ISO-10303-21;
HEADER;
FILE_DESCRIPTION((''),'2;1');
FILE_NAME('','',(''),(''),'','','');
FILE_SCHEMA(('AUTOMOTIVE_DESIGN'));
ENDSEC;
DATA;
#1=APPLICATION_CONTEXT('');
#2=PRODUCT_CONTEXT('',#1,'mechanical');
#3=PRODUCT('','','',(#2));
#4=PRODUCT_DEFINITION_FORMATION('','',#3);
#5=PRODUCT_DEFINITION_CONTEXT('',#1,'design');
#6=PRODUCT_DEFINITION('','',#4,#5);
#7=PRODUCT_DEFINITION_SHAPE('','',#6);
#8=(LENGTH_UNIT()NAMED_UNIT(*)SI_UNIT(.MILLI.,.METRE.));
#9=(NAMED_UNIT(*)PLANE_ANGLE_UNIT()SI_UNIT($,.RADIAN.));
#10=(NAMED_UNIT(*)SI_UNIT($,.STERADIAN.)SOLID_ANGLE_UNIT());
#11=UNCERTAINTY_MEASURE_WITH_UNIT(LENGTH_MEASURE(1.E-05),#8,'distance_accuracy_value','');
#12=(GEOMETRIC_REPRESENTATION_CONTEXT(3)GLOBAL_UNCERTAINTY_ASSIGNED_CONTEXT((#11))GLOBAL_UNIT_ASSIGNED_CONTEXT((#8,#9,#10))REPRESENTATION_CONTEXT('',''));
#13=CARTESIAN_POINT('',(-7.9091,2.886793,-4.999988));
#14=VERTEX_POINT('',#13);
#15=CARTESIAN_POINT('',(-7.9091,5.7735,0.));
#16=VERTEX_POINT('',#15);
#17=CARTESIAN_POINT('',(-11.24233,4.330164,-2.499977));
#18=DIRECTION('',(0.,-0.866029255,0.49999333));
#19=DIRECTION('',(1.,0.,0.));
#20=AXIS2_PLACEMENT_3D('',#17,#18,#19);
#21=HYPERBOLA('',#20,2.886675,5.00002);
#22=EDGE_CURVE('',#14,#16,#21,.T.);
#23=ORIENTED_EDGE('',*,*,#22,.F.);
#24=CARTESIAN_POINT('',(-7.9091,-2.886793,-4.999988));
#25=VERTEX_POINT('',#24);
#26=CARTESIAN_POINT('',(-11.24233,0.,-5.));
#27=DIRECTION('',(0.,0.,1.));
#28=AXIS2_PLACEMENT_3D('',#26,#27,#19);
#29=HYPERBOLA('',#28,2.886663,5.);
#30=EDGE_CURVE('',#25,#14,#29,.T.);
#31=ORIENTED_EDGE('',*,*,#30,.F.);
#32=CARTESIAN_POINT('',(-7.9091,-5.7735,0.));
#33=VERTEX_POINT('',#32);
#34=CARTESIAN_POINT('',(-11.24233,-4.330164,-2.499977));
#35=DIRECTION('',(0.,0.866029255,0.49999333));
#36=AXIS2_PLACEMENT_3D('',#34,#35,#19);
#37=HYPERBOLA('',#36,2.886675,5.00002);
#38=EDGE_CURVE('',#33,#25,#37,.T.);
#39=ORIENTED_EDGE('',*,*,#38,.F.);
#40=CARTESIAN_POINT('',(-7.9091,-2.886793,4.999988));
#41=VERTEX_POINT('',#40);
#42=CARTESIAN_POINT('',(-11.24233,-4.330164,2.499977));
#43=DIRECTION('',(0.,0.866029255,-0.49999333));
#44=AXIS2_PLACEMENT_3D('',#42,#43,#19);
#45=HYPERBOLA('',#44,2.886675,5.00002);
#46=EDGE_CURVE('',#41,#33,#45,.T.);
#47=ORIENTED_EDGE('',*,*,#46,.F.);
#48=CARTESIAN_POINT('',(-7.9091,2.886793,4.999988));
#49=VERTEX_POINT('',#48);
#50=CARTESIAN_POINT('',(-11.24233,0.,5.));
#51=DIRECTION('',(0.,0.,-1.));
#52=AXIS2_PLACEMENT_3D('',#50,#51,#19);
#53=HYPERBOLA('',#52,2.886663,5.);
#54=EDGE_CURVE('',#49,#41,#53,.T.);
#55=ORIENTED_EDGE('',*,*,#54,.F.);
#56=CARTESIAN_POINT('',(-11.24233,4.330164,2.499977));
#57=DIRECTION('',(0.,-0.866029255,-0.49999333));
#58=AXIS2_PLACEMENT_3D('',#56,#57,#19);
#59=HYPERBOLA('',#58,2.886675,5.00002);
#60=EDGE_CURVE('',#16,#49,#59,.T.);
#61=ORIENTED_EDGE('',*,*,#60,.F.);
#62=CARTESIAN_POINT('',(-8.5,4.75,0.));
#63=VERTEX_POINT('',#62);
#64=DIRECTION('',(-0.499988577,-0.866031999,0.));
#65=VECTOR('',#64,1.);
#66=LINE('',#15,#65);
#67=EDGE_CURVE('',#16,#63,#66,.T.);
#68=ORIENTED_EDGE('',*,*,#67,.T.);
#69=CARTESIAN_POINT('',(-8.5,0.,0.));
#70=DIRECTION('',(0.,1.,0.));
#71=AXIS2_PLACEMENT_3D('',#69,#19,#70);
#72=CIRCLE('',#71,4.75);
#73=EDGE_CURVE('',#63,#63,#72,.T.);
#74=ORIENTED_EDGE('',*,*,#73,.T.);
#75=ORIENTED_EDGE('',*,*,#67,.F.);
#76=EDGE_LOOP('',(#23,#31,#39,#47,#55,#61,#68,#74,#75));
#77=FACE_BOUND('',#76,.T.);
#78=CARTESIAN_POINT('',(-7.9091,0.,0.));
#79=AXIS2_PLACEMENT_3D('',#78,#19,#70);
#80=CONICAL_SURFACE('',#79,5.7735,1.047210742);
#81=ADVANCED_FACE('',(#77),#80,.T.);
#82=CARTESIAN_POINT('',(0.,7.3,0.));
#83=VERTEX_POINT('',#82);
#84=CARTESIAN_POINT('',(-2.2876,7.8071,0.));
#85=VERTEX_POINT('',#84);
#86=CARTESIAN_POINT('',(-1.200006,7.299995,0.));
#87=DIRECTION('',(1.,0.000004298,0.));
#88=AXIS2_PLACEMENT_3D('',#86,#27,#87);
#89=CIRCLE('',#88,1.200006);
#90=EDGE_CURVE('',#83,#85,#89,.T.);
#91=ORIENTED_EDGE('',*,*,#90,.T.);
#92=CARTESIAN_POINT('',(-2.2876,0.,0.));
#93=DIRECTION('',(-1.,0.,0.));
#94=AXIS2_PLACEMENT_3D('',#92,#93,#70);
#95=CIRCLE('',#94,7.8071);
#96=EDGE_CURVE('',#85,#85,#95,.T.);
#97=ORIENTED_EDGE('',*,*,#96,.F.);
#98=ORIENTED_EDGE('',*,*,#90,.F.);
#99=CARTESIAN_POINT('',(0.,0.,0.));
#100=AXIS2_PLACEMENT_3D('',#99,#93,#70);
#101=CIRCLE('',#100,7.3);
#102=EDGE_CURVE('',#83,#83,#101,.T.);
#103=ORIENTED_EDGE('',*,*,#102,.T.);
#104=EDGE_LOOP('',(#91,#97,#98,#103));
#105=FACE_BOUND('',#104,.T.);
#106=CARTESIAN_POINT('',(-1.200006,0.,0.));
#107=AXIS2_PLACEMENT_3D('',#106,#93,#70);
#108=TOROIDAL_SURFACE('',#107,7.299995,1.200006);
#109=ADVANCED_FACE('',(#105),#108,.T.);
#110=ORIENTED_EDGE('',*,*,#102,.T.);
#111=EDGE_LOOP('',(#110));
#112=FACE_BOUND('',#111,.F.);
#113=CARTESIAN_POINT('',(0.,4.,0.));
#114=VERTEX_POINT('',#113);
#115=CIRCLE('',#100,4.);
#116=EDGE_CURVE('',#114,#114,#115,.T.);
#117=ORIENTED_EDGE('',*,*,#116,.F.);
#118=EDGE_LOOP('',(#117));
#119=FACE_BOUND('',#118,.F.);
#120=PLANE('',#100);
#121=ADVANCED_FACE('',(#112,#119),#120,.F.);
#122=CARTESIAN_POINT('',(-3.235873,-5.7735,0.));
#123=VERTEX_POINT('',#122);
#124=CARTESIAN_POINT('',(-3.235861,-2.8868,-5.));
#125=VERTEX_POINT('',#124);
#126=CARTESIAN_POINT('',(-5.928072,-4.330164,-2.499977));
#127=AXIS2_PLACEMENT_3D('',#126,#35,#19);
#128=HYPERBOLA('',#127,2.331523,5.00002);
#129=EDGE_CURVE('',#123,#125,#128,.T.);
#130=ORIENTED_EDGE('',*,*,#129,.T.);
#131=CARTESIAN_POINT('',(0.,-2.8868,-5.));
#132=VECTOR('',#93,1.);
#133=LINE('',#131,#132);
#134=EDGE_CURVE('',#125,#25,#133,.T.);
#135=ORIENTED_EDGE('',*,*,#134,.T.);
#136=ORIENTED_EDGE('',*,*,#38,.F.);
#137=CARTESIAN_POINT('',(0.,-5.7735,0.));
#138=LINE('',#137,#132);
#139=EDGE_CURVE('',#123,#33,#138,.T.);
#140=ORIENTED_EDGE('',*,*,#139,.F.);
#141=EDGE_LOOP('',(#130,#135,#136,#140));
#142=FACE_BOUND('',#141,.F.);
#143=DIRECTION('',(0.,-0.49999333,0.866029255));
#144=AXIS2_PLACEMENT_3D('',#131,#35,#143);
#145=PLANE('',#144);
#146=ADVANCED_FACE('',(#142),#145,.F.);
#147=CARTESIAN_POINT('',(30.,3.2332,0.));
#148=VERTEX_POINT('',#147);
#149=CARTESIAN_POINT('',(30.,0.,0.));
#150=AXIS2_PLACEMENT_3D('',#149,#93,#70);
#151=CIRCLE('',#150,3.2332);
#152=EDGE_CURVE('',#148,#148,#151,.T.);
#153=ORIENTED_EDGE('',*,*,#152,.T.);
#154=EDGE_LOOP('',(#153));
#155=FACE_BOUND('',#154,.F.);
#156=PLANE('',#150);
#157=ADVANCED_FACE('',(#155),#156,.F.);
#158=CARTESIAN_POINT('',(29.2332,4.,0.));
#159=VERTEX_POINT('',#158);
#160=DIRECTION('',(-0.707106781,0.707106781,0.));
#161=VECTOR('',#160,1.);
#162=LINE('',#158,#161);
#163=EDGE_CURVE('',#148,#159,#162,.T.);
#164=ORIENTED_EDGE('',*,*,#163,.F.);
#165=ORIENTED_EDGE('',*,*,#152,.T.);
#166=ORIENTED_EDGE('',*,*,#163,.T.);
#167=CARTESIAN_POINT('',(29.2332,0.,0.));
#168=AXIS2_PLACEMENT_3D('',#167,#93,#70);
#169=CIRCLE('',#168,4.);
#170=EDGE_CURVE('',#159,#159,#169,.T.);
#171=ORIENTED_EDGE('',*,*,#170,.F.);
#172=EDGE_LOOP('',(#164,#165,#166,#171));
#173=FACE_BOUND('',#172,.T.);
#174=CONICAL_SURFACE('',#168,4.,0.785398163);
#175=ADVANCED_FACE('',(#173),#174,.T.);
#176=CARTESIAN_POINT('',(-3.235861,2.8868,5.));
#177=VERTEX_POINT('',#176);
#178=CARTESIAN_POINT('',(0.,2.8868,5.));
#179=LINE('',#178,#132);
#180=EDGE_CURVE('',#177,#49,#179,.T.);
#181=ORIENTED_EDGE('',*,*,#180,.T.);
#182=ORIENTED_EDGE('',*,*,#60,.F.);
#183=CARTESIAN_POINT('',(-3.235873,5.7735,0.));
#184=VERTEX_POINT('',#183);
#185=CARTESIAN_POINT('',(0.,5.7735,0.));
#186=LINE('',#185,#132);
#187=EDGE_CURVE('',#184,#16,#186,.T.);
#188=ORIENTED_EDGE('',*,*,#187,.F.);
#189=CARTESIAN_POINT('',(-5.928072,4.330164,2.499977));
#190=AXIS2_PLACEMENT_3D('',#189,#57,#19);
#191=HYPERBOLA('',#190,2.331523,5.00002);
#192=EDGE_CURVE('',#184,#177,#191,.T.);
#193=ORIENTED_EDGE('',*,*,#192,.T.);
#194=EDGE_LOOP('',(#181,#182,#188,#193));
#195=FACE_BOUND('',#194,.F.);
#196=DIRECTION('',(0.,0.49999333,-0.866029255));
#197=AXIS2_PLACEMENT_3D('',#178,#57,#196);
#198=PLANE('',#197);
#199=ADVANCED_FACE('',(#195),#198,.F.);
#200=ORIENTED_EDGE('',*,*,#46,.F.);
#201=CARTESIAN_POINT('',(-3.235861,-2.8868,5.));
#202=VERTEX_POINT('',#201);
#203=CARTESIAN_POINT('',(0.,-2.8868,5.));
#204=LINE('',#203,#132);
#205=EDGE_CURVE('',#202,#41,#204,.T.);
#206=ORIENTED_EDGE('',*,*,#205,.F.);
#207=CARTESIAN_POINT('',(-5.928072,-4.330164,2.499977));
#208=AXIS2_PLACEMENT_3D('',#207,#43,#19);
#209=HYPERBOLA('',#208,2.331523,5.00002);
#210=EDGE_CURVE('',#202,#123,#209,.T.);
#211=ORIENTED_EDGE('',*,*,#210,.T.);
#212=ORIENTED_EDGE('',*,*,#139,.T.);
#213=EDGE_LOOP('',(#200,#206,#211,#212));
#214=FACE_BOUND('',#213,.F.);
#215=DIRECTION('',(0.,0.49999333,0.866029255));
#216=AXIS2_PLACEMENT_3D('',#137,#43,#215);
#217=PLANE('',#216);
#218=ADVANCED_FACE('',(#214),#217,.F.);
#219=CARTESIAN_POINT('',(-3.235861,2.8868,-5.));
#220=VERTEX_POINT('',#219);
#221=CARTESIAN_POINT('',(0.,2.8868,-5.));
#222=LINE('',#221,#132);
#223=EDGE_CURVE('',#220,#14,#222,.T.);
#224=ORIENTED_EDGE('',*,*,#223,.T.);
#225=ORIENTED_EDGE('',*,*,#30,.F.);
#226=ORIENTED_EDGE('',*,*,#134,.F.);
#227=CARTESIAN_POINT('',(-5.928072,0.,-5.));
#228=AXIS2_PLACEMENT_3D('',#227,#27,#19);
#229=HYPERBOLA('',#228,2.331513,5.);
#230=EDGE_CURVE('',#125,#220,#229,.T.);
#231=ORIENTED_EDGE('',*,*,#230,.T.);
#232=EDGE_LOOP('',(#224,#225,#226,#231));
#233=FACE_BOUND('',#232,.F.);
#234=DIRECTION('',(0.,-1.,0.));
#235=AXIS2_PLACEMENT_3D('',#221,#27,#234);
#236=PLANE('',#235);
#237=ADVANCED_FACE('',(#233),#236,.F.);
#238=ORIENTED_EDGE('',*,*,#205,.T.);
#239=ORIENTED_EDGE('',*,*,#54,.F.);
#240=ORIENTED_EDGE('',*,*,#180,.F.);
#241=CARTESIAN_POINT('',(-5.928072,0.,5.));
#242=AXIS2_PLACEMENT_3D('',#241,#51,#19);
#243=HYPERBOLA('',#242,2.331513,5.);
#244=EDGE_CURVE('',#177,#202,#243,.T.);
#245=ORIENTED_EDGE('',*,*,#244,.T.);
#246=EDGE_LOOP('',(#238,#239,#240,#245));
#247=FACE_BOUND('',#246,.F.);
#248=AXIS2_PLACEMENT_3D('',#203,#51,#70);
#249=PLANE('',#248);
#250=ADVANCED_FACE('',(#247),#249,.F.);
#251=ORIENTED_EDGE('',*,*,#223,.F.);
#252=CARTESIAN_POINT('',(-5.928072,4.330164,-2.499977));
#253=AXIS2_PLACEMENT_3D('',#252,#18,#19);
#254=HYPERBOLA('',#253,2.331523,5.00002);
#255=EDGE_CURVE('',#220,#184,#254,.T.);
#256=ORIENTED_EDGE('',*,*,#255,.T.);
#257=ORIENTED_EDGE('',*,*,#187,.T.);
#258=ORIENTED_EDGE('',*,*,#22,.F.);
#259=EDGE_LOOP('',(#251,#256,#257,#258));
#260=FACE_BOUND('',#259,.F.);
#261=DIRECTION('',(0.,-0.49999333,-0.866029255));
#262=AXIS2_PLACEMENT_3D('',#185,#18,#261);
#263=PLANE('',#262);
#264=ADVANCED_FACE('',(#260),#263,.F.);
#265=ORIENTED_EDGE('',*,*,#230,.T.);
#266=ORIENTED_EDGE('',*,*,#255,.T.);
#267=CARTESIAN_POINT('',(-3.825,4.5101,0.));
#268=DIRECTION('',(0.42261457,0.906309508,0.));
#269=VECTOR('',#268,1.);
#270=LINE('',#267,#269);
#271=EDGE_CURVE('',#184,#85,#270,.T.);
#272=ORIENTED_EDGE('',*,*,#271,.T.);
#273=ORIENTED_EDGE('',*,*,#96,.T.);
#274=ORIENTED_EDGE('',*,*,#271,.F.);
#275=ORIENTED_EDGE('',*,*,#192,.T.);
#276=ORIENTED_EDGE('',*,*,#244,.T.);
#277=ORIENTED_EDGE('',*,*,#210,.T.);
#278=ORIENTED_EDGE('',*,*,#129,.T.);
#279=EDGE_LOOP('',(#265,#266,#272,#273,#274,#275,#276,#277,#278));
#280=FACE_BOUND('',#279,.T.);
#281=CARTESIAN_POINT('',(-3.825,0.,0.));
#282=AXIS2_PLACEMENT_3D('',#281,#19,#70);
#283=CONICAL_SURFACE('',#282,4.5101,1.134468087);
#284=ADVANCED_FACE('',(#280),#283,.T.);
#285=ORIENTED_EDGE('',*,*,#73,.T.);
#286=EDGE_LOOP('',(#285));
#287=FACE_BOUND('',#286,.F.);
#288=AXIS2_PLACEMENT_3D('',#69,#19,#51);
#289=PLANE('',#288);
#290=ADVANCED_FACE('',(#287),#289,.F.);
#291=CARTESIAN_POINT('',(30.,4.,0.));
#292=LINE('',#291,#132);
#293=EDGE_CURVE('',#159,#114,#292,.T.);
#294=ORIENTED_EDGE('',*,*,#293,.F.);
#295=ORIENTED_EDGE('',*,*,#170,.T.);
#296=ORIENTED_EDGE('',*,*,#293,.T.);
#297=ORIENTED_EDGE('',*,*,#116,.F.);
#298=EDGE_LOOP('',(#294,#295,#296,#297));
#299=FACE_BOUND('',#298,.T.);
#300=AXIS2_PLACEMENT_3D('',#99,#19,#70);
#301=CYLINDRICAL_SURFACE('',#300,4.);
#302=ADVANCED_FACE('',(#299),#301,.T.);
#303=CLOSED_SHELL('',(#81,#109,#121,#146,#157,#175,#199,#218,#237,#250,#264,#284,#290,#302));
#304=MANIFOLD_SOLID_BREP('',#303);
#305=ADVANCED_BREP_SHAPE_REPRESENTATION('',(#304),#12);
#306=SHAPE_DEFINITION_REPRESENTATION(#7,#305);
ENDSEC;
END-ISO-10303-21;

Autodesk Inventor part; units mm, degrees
ref_plane "YZ Plane" through (0, 0, 0) normal (1, 0, 0) x (0, 1, 0)
ref_plane "XZ Plane" through (0, 0, 0) normal (0, 1, 0) x (-1, 0, 0)
sketch "Sketch1" plane through (0, 0, 0) normal (0, 0, 1) x (1, 0, 0)
  line L0 (-3.825, 0) -> (-3.825, 4.5101)
  line L1 (0, 7.3) -> (0, 4)
  line L2 (8, 4) -> (30, 4)
  line L3 (30, 4) -> (30, 0)
  line L4 (30, 0) -> (-3.825, 0)
  arc A0 (0, 7.3) -> (-2.2876, 7.8071) centre (-1.2, 7.3) ccw
  line L5 (0, -1.745) -> (0, 10.4702) projected
  line L6 (-11.59, 0) -> (42.765, 0) projected
  line L7 (0, 4) -> (0.0001, 4)
  line L8 (0.0001, 4) -> (0.0001, 4)
  line L9 (0.0001, 4) -> (7.2332, 4)
  line L10 (7.2332, 4) -> (8, 4)
  line L11 (-3.825, 4.5101) -> (-2.2876, 7.8071)
  line L12 (0.0001, 4) -> (8, 4) construction
  line L13 (8, 4) -> (8, 0) construction
  dimension "d0" = 1.2
  dimension "d1" = 30
  dimension "d2" = 22
  dimension "d3" = 17
  dimension "d4" = 8
  dimension "d5" = 3.825
  dimension "d15" = 8
  dimension "d16" = 8
  dimension "d17" = 0.0001
  dimension "d18" = 0.7668
  dimension "d19" = 25
revolve "Body" add sketch "Sketch1" angle 360 about axis through (30, 0, 0) along (-1, 0, 0)
sketch "Sketch2" plane through (0, 0, 0) normal (1, 0, 0) x (0, 0, -1)
  line L0 (5, 2.8868) -> (5, -2.8868)
  line L1 (5, -2.8868) -> (0, -5.7735)
  line L2 (0, -5.7735) -> (-5, -2.8868)
  line L3 (-5, -2.8868) -> (-5, 2.8868)
  line L4 (-5, 2.8868) -> (0, 5.7735)
  line L5 (0, 5.7735) -> (5, 2.8868)
  point P0 (0, 0)
  point P1 (0, 0)
  dimension "d23" = 10
extrude "Head" add sketch "Sketch2" against normal blind 8.5
sketch "Sketch3" plane through (0, 0, 0) normal (0, 0, 1) x (1, 0, 0)
  line L0 (-8.5, 4.75) -> (-8.5, 5.7735)
  line L1 (-8.5, 5.7735) -> (-7.9091, 5.7735)
  line L2 (-7.9091, 5.7735) -> (-8.5, 4.75)
  line L3 (-9.5528, 0) -> (-2.183, 0) projected
  line L4 (-8.5, 5.7735) -> (-8.5, 2.8868) projected
  line L5 (-3.2359, 5.7735) -> (-8.5, 5.7735) projected
  point P0 (-8.5, 2.8868)
  dimension "d8" = 30
  dimension "d22" = 9.5
revolve "Chamfer1" cut sketch "Sketch3" angle 360 about axis through (-10, 0, 0) along (1, 0, 0)
thread "Thread" size "M8x1.25" class "6g" standard "ISO Metric profile" length 22
chamfer "Chamfer2" distance 0.7668 distance2 0.7668 1 edges at (30, -4, 0) measured on face at (30, 0.9825, 0.2422)
ref_plane "Work Plane1" through (10.95, 0, 0) normal (0, 0, -1) x (1, 0, 0)
equation "\"d0\" = PHH"
equation "\"d1\" = NLG"
equation "\"d2\" = GEL"
equation "\"d3\" = LADI"
equation "\"d4\" = GD"
equation "\"d5\" = 0.45 * KOH"
equation "\"d15\" = SD2"
equation "\"d16\" = BDM"
equation "\"d18\" = GAL"
equation "\"d19\" = KEWI"
equation "\"d23\" = SW"
equation "\"d6\" = KOH"
equation "\"d8\" = ANG1"
equation "\"d22\" = SW0"
equation "\"d10\" = GEL"
equation "\"d13\" = -0.5 * SPD + 0.5 * GD"
equation "\"d14\" = GUL"
equation "\"NLG\" = 30"
equation "\"GD\" = NND"
equation "\"BDM\" = NND"
equation "\"KOH\" = 8.5"
equation "\"GEL\" = 22"
equation "\"LADI\" = 17"
equation "\"SW\" = 10"
equation "\"PHH\" = RR"
equation "\"SW0\" = 9.5"
equation "\"SPD\" = NND - 1.2269 * PTC"
equation "\"SD2\" = NND"
equation "\"SD\" = 0"
equation "\"ANG1\" = 30deg"
equation "\"KEWI\" = 25deg"
equation "\"GAL\" = 0.61345 * PTC"
equation "\"GUL\" = 0.61345 * PTC"
equation "\"PTC\" = 1.25"
equation "\"THREADDIA\" = 8"
equation "\"E0\" = 1.155 * SW"
equation "\"TOA\" = 30deg"
equation "\"NND\" = 8"
equation "\"GD1\" = THREADDIA - 1.2269 * PTC"
equation "\"KOH1\" = 3.8"
equation "\"RR\" = 1.2"
properties part number "PWTR-0134" material "Stainless Steel"
